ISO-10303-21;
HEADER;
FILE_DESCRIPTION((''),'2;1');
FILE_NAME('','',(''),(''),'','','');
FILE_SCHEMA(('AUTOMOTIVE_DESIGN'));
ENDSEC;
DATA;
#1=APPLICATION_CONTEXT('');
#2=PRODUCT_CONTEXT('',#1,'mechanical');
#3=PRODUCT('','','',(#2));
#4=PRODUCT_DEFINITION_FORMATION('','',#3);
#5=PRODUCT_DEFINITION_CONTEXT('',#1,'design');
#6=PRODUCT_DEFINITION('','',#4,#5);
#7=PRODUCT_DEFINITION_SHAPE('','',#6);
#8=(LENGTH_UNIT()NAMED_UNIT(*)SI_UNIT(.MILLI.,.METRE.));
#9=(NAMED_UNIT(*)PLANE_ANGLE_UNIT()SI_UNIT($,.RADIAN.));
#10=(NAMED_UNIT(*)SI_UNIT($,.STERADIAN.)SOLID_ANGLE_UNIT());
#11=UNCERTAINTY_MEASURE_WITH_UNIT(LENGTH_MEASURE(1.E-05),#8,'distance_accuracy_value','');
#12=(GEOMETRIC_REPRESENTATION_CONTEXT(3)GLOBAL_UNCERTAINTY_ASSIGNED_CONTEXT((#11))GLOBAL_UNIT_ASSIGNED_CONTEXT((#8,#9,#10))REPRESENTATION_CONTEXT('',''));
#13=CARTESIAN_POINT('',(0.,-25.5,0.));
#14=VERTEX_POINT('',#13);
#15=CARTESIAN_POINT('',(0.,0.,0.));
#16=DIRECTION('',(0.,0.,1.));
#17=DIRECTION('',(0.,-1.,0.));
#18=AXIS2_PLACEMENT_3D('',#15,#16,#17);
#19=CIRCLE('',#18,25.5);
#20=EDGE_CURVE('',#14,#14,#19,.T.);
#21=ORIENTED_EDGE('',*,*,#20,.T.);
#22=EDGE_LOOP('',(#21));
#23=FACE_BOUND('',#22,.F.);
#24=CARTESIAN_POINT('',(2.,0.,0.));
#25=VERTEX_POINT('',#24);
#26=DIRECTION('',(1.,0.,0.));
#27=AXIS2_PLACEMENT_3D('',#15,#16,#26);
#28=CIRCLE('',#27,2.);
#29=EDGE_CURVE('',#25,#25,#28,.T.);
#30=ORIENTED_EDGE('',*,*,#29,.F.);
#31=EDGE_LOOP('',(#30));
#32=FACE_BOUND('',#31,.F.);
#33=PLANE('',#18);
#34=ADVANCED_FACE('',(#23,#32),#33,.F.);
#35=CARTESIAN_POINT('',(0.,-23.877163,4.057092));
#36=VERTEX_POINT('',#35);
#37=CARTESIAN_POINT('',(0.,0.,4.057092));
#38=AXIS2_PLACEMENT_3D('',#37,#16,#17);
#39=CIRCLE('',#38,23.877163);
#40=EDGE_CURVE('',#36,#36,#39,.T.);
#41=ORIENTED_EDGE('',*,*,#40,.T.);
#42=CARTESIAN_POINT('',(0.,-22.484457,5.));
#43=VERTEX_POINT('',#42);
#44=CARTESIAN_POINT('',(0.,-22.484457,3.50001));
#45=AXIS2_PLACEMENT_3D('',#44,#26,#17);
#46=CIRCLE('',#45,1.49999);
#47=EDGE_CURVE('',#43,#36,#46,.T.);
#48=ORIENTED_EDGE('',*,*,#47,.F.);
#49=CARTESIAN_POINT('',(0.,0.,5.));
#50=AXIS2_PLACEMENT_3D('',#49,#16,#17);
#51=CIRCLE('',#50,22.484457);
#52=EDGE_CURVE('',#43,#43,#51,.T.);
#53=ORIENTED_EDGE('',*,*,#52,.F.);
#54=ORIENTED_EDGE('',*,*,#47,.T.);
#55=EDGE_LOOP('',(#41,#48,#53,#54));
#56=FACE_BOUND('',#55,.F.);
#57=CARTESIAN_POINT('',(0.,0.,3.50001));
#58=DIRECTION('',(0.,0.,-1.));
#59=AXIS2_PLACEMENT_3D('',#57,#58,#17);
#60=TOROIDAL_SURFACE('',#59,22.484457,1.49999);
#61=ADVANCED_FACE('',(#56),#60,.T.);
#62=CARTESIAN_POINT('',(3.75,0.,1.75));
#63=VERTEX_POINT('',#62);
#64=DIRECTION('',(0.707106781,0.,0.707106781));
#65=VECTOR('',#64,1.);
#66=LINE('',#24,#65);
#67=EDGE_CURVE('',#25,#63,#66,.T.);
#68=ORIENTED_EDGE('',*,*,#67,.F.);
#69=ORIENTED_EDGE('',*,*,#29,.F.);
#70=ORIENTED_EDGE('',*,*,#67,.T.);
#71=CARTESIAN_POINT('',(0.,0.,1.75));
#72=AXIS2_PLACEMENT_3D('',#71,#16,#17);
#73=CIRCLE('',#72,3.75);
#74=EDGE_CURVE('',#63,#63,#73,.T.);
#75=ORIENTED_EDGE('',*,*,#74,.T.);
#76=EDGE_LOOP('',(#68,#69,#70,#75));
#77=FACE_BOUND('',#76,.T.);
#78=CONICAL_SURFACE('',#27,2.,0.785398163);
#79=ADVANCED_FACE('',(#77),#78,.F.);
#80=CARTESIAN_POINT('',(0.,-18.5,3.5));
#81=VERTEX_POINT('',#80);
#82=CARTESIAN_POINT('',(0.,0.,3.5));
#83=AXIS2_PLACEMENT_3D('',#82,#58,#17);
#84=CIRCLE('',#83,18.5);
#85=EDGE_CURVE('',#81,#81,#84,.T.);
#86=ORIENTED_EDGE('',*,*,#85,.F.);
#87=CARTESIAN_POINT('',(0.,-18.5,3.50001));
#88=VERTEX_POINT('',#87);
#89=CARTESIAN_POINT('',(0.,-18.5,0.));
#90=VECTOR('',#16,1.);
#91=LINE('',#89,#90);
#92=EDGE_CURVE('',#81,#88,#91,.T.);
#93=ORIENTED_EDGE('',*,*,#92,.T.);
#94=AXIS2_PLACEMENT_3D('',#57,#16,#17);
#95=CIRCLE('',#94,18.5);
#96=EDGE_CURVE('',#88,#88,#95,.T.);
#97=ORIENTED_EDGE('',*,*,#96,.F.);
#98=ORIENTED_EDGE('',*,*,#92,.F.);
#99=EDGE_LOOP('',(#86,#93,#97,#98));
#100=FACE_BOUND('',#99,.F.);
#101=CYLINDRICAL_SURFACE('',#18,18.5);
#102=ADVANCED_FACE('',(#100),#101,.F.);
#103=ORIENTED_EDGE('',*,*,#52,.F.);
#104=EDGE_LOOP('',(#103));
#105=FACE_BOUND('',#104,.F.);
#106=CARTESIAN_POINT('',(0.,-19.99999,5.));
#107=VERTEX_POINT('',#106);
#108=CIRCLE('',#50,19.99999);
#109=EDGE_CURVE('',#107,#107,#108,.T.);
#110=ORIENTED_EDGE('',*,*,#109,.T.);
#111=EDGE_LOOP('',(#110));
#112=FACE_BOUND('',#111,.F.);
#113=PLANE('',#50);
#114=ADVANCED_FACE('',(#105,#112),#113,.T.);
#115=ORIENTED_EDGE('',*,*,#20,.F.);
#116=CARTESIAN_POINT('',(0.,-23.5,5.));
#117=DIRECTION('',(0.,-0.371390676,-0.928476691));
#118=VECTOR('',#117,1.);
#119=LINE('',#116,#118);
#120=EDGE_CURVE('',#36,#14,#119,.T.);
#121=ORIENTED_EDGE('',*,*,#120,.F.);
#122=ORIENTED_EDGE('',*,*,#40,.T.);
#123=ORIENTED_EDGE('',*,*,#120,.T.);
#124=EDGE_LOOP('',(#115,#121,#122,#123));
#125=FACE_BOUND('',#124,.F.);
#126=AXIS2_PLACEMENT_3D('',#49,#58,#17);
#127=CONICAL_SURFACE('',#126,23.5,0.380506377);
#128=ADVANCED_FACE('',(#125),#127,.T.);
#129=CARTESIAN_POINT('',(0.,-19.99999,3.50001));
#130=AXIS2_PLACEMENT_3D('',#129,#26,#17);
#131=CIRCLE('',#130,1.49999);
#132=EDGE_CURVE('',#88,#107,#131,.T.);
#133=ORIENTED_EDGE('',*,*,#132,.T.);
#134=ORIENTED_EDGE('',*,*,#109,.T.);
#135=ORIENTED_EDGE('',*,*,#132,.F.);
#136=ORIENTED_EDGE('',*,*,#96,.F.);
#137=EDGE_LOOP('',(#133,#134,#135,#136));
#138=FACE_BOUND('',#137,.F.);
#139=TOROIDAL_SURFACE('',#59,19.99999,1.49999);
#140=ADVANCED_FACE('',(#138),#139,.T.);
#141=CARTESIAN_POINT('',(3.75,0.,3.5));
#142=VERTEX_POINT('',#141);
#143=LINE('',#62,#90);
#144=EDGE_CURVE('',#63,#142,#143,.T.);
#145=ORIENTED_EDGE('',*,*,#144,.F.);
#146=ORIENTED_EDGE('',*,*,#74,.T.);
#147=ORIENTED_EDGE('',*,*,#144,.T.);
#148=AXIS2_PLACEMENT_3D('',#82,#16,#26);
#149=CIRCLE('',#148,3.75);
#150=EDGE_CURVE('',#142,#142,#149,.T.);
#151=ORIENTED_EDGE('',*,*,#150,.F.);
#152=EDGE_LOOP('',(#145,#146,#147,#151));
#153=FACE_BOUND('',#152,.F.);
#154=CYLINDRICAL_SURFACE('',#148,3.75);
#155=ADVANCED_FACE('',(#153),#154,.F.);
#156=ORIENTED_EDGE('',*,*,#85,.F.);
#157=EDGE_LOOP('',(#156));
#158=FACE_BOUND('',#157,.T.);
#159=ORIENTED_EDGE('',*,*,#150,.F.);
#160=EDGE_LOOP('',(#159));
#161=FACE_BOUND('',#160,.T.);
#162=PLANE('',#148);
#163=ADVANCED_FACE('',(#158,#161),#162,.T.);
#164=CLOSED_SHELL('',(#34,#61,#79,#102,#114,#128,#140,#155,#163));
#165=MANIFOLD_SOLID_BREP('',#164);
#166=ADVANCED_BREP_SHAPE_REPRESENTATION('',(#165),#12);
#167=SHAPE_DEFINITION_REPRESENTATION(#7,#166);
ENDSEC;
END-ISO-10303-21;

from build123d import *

# Parameters (mm, degrees)
F0_R        = 18.5
F0_R_2      = 2
F1_DEPTH    = 3.5
F2_R        = 3.75
F3_DEPTH    = 0.5
F4_S5_R     = 3.75
F4_T6_DEPTH = 9
F8_R        = 1.49999


# Not quite as in the source:
# - a fillet or chamfer that OpenCascade refuses, or shapes differently, is made with other operations: its cross-section is extruded or revolved along the edge and cut away or added
# - a fillet or chamfer is up to 0.001 mm smaller than in the source, because OpenCascade refuses the exact size


with BuildPart() as f1:
    # F0 (on Top) → F1 (new body)
    with BuildSketch(Plane.XY):
        Circle(F0_R)
        Circle(F0_R_2, mode=Mode.SUBTRACT)
    extrude(amount=F1_DEPTH)

    # F2 (on face) → F3 (cut)
    with BuildSketch(Plane.XY.offset(3.5)):
        Circle(F2_R)
    extrude(amount=-F3_DEPTH, mode=Mode.SUBTRACT)

    # F4: chamfer of 3 on 1 edges, made by hand


with BuildPart() as f4_tool2:
    # F4_s3 → F4_t4 (revolve)
    with BuildSketch(Plane.XZ):
        Polygon((2, 0), (5, 3), (2, 3), align=None)
    revolve(axis=Axis((0, 0, 3), (0, 0, -1)))

    # F4_s5 → F4_t6 (intersect, symmetric)
    with BuildSketch(Plane.XY.offset(1.5)):
        Circle(F4_S5_R)
    extrude(amount=F4_T6_DEPTH, both=True, mode=Mode.INTERSECT)


with BuildPart() as f1_1:
    add(f1.part)

    # F4_t1: cut F4_tool2
    add(f4_tool2.part, mode=Mode.SUBTRACT)

    # F6 (on Right) → F7 (revolve)
    with BuildSketch(Plane.YZ):
        Polygon((-25.5, 0), (-18.5, 0), (-18.5, 3.5), (-18.5, 5), (-23.5, 5), align=None)
    revolve(axis=Axis((0, 0, 7.0907436311), (0, 0, 1)))

    # F8 (radius 1.5 in the source; OpenCascade refuses exactly that, so slightly less here)
    f8_edges = [f1_1.edges().sort_by_distance(p)[0] for p in [
        (0, 23.5, 5),
        (0, 18.5, 5),
    ]]
    fillet(f8_edges, radius=F8_R)


solid = f1_1.part
